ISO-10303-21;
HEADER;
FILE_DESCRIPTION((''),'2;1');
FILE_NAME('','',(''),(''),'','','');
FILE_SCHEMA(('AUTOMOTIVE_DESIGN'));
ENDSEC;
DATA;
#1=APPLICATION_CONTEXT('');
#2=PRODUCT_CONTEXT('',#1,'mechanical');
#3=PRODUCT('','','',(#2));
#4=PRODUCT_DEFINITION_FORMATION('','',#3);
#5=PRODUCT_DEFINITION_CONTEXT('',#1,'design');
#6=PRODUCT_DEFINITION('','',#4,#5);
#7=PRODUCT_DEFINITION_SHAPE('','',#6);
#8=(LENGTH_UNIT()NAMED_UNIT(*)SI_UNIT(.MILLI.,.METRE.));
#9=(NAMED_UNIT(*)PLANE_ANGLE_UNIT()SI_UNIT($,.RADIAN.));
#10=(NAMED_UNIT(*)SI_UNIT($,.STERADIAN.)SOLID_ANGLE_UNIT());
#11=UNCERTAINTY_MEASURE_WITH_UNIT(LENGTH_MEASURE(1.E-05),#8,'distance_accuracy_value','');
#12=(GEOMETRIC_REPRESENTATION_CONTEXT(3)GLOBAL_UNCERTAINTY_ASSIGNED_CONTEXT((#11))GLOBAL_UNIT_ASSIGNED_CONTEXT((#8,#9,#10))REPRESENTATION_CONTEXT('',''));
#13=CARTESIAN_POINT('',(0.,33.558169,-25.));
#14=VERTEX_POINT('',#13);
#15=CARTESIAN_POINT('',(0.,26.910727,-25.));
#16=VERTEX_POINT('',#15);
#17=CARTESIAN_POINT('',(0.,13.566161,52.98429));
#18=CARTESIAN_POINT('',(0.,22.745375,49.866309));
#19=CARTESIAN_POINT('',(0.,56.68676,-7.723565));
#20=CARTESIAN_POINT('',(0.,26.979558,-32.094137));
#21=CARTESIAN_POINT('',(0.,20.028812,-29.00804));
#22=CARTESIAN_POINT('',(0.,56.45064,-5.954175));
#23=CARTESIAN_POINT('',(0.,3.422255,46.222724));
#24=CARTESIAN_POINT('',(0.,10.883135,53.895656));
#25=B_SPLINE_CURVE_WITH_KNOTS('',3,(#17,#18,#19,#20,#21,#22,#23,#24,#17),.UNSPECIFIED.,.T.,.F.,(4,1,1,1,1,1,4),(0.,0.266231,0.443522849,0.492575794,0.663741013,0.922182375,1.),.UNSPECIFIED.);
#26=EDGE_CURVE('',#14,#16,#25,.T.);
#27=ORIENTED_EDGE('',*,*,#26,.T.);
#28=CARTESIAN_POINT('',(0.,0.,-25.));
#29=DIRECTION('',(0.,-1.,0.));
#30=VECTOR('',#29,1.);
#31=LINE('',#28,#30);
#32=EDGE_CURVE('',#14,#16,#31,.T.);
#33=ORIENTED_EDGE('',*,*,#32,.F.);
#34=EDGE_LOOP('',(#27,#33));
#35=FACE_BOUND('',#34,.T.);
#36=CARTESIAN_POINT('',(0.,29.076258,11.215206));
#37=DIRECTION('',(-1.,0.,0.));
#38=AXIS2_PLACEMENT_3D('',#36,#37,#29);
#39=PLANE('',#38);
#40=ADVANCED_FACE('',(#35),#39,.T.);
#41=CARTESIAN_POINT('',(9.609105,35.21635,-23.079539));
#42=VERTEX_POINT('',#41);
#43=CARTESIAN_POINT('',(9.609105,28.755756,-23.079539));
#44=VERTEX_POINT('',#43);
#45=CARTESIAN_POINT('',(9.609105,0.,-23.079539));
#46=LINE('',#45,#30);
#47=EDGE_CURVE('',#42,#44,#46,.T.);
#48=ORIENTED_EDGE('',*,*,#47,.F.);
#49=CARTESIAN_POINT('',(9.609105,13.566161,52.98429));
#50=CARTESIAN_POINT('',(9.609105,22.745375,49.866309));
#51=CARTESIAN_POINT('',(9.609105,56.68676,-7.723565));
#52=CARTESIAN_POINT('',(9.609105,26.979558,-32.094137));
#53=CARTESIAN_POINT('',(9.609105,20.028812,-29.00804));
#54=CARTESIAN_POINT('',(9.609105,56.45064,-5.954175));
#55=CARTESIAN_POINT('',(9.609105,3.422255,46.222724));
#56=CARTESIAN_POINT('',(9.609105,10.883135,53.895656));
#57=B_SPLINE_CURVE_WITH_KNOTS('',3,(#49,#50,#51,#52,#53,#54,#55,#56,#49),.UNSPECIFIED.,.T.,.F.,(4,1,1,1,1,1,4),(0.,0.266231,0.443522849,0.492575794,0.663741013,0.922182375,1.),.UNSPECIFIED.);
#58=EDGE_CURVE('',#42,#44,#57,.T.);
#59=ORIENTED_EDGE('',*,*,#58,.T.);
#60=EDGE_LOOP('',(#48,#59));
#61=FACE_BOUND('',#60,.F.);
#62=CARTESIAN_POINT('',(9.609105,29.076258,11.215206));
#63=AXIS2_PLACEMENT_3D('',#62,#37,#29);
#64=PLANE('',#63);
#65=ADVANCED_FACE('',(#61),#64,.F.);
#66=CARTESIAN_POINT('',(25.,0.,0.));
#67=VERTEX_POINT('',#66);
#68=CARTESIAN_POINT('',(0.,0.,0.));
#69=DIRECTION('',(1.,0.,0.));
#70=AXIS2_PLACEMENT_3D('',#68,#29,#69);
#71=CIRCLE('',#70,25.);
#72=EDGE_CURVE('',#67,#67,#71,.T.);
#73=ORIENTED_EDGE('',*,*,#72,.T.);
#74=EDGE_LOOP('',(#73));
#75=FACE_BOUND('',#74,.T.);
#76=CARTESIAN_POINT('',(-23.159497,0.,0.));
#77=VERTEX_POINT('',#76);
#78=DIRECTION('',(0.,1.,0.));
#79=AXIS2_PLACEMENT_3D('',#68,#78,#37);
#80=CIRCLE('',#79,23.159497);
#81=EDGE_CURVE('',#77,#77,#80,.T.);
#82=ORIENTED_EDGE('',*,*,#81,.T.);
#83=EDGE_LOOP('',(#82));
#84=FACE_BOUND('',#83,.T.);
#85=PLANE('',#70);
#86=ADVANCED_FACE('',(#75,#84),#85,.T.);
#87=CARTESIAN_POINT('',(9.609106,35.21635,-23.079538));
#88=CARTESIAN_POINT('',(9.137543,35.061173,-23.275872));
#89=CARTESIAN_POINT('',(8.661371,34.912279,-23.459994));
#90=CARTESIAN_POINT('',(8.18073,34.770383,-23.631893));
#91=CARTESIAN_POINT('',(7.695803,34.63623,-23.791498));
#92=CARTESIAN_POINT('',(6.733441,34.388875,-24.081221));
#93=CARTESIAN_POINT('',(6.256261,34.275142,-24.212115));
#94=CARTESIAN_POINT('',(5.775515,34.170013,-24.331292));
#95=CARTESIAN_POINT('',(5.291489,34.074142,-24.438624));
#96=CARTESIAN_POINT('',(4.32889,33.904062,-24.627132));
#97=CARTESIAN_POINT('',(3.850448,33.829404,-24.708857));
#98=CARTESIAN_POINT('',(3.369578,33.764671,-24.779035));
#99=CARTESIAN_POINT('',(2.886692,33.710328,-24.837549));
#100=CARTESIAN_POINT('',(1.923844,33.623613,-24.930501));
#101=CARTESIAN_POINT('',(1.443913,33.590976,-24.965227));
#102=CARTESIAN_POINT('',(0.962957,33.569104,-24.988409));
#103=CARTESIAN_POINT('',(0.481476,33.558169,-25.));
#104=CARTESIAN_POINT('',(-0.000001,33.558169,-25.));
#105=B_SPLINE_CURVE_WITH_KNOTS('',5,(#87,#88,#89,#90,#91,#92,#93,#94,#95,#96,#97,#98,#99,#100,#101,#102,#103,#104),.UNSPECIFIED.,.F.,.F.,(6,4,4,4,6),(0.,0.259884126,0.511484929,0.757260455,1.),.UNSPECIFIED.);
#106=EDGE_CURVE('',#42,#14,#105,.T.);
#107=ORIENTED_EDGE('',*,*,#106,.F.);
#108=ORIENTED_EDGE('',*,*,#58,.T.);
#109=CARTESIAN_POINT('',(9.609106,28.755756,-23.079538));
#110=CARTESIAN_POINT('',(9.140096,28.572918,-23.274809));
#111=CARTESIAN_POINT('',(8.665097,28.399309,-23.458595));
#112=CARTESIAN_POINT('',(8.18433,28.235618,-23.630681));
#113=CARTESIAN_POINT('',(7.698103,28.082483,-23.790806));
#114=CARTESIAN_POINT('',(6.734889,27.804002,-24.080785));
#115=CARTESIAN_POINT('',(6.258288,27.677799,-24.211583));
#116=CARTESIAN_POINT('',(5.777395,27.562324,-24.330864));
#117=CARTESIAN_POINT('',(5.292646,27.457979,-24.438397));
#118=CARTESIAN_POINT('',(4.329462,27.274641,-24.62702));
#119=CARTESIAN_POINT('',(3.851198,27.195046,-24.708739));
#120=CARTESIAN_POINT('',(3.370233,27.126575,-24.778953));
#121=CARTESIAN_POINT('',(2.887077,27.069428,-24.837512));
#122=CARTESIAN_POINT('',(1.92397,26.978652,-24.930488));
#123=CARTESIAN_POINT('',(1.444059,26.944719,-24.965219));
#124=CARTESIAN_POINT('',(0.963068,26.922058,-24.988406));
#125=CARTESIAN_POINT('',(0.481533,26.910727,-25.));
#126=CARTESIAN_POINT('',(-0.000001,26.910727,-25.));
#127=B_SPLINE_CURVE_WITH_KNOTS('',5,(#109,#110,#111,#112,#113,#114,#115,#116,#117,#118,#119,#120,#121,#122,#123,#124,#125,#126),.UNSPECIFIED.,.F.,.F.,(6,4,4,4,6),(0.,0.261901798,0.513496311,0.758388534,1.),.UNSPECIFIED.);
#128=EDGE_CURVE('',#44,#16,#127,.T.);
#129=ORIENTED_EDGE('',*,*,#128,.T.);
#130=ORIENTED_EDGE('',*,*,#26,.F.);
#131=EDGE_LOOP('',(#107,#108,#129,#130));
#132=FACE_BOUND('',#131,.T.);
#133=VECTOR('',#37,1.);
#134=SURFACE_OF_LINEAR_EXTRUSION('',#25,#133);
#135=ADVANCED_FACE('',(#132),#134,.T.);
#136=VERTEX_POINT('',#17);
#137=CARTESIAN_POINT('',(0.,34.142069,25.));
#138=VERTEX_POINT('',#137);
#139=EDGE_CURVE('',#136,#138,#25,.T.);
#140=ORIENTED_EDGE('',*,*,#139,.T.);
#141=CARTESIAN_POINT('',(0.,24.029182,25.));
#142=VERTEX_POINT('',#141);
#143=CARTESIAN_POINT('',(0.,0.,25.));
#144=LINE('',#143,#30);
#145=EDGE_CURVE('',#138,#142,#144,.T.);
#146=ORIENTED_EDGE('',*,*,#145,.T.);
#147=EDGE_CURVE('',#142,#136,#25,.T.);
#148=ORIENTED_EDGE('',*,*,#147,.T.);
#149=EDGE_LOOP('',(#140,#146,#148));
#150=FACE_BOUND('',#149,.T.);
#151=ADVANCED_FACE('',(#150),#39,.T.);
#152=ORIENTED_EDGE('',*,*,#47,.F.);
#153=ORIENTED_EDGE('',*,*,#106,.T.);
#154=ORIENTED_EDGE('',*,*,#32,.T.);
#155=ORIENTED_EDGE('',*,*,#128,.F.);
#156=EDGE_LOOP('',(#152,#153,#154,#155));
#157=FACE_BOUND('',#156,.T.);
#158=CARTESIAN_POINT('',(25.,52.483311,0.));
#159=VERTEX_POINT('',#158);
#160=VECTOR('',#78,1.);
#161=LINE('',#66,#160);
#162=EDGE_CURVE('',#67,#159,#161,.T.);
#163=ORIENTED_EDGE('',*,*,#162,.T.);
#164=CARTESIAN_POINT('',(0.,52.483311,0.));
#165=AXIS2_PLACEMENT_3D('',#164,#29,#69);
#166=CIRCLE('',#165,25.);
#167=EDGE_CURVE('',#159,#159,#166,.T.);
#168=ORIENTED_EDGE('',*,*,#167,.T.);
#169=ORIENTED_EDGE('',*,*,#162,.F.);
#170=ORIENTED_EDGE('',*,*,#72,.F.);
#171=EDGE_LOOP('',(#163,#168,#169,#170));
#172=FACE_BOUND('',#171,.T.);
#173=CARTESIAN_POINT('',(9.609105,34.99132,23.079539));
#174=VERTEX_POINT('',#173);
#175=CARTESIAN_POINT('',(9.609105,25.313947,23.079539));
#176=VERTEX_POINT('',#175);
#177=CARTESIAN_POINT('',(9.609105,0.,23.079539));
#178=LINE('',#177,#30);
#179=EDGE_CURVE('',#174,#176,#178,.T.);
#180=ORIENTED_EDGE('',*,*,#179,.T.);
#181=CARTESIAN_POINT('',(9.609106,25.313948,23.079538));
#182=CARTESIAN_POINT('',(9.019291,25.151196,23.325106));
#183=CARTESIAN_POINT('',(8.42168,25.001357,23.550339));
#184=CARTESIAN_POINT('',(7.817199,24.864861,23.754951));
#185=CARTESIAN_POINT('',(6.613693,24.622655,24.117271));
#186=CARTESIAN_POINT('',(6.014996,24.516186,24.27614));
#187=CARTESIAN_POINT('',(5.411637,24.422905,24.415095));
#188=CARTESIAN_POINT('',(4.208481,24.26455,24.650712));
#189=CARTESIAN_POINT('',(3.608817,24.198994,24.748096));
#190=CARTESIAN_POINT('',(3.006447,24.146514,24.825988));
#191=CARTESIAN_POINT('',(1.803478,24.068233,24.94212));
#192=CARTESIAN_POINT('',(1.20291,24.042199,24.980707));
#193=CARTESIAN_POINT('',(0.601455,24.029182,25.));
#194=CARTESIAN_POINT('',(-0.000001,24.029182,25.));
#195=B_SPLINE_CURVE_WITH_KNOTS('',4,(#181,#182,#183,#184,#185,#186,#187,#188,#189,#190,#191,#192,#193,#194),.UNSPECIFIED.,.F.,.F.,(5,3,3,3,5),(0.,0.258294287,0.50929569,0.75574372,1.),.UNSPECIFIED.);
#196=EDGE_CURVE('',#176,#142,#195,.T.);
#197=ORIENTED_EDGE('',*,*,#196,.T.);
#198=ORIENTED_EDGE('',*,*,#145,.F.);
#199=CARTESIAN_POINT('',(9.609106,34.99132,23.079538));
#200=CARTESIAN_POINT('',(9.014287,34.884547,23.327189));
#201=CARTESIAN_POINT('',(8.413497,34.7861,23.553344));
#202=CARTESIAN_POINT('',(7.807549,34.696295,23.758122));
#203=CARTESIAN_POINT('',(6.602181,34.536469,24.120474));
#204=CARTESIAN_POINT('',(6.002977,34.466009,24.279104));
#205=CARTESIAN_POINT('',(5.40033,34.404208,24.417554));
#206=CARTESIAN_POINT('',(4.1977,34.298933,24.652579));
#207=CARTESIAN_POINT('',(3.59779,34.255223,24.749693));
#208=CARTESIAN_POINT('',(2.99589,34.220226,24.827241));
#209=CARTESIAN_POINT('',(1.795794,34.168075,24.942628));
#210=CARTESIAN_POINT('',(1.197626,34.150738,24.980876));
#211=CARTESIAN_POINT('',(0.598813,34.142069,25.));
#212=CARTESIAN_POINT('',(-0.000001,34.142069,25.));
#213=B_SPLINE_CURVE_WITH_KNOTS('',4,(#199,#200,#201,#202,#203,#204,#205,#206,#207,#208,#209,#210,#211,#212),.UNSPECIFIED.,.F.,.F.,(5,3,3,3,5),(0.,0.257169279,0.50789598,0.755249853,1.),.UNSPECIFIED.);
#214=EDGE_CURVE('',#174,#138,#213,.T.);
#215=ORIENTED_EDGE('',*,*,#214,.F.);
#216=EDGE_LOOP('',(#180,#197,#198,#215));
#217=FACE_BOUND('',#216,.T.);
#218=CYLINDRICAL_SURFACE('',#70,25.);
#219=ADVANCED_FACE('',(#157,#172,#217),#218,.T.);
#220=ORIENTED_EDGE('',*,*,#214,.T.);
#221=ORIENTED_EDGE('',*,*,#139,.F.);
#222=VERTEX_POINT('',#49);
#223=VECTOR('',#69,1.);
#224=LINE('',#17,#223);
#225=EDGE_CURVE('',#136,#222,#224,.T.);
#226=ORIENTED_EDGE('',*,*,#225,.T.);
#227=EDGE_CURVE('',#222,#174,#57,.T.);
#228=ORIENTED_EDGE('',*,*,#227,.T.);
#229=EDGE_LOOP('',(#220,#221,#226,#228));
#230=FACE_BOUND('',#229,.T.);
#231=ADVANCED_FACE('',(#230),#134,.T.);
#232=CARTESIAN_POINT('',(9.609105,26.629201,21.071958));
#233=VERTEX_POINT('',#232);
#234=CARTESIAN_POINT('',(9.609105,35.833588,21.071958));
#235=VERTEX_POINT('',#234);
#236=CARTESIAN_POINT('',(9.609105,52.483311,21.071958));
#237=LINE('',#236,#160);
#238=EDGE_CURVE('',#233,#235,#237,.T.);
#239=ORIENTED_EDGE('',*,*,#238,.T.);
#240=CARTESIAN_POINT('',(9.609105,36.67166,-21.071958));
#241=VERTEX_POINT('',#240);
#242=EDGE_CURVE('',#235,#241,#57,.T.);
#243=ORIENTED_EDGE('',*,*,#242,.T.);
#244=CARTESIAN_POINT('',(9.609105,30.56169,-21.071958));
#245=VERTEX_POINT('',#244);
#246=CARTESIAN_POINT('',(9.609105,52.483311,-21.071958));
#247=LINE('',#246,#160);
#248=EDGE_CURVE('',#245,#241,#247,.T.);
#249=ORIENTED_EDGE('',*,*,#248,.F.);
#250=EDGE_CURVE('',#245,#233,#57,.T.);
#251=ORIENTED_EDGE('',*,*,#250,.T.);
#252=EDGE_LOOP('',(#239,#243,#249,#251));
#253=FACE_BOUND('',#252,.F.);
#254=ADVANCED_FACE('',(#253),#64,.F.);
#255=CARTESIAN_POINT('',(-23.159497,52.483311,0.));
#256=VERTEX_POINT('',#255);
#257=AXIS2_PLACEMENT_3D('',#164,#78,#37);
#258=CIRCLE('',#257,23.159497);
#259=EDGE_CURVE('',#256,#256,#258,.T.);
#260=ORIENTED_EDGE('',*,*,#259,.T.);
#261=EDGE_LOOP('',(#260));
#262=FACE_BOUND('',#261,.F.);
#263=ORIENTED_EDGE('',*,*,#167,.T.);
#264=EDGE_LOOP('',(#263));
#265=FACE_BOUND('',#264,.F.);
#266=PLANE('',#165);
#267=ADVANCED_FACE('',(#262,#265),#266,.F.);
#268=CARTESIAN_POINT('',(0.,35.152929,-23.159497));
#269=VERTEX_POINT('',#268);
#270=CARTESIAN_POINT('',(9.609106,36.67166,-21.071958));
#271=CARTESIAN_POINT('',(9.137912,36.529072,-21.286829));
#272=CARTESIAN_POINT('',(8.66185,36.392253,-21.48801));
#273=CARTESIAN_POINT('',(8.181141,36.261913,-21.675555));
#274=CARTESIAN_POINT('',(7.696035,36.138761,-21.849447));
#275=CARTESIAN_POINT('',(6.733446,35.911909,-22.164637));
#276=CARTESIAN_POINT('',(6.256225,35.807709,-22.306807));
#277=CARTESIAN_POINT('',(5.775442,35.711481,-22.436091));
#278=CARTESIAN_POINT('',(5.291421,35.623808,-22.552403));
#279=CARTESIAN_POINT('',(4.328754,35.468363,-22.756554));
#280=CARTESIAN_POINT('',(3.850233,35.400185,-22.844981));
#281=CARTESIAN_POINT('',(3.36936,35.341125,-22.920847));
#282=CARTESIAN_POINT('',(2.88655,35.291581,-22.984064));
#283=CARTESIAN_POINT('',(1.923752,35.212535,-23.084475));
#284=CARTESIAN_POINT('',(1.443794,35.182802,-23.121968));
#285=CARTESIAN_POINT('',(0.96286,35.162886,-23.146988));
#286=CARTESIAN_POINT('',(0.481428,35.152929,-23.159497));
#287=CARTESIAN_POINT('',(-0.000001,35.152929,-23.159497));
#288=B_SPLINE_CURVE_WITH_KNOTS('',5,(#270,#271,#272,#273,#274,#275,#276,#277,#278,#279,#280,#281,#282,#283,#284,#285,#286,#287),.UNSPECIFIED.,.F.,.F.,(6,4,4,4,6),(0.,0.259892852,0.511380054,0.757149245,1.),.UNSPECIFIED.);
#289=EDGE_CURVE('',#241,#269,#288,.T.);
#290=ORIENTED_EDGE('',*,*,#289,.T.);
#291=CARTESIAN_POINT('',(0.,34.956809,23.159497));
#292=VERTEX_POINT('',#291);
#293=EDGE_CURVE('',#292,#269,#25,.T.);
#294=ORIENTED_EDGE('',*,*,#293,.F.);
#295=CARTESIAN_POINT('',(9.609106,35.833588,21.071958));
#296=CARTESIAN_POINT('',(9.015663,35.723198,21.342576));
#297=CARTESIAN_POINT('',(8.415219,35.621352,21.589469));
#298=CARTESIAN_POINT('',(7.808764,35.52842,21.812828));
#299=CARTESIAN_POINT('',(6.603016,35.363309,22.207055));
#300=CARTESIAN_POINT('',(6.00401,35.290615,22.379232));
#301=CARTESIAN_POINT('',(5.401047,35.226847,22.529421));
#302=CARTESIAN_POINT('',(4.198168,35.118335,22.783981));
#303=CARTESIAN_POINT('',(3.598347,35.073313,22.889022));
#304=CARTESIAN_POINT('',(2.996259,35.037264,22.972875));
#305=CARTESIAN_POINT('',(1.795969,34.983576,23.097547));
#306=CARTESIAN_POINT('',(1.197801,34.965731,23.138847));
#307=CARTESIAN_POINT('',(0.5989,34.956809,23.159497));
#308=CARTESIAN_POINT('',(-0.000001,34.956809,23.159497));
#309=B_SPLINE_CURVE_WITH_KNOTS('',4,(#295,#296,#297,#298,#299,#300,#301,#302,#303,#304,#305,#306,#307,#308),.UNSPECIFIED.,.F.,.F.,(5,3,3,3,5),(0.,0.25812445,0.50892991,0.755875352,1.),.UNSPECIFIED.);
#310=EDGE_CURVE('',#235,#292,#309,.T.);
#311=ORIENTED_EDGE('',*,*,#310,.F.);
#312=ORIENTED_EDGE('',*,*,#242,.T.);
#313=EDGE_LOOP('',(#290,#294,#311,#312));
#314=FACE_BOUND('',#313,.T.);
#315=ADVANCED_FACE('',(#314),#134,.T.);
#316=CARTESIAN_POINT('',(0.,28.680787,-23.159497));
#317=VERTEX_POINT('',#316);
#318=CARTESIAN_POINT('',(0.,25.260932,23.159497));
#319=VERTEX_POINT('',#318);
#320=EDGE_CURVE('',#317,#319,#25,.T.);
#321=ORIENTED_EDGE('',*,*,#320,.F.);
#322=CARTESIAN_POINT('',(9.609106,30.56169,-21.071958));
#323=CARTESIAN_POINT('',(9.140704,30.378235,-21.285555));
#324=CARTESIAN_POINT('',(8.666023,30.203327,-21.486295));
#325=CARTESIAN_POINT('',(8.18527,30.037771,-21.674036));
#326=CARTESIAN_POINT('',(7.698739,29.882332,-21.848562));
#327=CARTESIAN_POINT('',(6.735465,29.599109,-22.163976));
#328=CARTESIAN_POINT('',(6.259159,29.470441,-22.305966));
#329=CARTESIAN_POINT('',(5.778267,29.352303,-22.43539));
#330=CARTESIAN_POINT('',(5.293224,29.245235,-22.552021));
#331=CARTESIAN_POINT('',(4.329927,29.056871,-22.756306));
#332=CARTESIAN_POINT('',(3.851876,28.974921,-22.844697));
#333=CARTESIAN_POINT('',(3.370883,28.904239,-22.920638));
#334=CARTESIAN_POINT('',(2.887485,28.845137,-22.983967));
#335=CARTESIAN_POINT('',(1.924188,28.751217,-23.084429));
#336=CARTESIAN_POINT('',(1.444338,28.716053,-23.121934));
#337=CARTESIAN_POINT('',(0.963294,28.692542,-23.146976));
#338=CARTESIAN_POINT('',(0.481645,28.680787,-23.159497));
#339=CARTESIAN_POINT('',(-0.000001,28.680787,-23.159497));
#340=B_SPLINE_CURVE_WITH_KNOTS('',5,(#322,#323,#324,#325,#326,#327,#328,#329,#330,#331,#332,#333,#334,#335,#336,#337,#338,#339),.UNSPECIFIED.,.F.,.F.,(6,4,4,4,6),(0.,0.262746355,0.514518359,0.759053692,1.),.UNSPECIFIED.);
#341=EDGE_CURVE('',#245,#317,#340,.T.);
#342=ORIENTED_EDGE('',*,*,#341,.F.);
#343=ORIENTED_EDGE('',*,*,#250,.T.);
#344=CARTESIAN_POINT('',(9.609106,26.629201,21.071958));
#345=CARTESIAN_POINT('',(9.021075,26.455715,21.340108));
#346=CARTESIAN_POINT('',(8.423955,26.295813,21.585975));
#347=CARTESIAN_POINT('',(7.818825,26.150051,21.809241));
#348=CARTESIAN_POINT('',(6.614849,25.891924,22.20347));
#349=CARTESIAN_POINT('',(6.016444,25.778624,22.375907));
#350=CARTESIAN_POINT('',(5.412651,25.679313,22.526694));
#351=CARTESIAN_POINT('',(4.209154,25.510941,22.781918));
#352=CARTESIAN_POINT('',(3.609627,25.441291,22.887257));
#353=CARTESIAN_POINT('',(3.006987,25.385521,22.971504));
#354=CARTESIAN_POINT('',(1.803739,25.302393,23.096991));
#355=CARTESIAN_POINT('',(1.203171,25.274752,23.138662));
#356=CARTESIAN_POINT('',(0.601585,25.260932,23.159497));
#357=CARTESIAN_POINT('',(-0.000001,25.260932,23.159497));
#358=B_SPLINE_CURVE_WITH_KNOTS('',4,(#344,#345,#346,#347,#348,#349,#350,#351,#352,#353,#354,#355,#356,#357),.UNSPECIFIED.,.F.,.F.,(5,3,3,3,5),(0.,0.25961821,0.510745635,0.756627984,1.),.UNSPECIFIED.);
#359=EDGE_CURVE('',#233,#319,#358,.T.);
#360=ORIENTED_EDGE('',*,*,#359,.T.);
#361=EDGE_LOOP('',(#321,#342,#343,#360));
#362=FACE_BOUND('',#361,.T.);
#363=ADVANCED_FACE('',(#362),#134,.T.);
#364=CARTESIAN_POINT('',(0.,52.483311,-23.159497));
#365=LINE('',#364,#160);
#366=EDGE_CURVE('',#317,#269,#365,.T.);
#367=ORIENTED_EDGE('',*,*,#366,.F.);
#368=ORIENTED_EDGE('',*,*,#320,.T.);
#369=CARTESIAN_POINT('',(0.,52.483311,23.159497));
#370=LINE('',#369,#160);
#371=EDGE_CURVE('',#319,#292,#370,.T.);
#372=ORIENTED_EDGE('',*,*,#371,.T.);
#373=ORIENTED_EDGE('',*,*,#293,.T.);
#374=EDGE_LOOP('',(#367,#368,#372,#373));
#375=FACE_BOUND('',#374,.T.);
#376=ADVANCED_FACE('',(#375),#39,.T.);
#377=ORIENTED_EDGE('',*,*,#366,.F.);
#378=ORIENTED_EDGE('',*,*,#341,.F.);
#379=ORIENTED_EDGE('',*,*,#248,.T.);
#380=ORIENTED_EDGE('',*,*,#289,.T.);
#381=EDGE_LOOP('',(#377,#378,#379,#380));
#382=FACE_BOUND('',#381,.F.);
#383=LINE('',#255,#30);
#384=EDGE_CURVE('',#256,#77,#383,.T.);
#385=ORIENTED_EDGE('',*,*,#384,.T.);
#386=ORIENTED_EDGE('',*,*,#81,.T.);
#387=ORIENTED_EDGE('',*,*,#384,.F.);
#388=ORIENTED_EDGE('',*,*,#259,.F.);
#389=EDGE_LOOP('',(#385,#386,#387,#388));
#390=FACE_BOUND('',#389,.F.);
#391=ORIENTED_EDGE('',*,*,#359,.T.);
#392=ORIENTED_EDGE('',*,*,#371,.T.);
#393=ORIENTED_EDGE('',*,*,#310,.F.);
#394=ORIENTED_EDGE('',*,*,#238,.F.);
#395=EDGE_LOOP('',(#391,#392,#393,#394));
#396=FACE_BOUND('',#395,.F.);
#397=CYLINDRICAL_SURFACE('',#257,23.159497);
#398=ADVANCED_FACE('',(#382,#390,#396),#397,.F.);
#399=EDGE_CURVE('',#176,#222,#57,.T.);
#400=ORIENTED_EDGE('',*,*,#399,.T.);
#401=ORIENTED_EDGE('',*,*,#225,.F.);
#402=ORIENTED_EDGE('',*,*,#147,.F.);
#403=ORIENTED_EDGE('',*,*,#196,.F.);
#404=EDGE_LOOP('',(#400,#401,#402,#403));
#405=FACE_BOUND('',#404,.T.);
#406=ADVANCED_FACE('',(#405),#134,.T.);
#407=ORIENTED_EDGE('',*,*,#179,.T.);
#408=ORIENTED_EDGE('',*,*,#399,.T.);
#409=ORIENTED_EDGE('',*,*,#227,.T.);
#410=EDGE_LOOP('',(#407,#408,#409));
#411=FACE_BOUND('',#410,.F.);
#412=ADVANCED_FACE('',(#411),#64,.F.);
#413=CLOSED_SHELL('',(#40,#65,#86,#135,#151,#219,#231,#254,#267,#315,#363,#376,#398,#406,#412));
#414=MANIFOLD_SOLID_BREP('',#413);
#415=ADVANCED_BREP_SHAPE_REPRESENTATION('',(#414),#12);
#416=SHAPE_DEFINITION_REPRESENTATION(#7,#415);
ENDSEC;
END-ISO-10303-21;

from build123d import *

# Parameters (mm, degrees)
F0_R     = 25
F1_DEPTH = 52.483310923
F4_R     = 23.1594972358
F5_DEPTH = 56.222954765
F7_DEPTH = 9.6091050655


# Not quite as in the source:
# - the program builds the solid bodies; features that only make, move or delete a surface that nothing else refers to are left out


with BuildPart() as f1:
    # F0 (on Front) → F1 (new body)
    with BuildSketch(Plane.XZ):
        Circle(F0_R)
    extrude(amount=-F1_DEPTH)

    # F4 (on face) → F5 (cut)
    with BuildSketch(Plane(origin=(0, 52.483310923, 0), x_dir=(-1, 0, 0), z_dir=(0, 1, 0))):
        Circle(F4_R)
    extrude(amount=-F5_DEPTH, mode=Mode.SUBTRACT)

    # F6 (on Right) → F7 (join)
    with BuildSketch(Plane.YZ):
        with BuildLine():
            add(Edge.make_bspline(
                [(13.5661605746, 52.984289825), (22.7453749365, 49.8663088316), (56.6867603684, -7.723565307), (26.9795580338, -32.0941370462), (20.0288116996, -29.0080395676), (56.4506404561, -5.9541746073), (3.4222546759, 46.2227244929), (10.8831347215, 53.8956557965), (13.5661605746, 52.984289825)],
                knots=[0, 0, 0, 0, 0.2662310005, 0.4435228486, 0.4925757944, 0.6637410127, 0.9221823754, 1, 1, 1, 1], degree=3))
        make_face()
    extrude(amount=F7_DEPTH)


solid = f1.part
